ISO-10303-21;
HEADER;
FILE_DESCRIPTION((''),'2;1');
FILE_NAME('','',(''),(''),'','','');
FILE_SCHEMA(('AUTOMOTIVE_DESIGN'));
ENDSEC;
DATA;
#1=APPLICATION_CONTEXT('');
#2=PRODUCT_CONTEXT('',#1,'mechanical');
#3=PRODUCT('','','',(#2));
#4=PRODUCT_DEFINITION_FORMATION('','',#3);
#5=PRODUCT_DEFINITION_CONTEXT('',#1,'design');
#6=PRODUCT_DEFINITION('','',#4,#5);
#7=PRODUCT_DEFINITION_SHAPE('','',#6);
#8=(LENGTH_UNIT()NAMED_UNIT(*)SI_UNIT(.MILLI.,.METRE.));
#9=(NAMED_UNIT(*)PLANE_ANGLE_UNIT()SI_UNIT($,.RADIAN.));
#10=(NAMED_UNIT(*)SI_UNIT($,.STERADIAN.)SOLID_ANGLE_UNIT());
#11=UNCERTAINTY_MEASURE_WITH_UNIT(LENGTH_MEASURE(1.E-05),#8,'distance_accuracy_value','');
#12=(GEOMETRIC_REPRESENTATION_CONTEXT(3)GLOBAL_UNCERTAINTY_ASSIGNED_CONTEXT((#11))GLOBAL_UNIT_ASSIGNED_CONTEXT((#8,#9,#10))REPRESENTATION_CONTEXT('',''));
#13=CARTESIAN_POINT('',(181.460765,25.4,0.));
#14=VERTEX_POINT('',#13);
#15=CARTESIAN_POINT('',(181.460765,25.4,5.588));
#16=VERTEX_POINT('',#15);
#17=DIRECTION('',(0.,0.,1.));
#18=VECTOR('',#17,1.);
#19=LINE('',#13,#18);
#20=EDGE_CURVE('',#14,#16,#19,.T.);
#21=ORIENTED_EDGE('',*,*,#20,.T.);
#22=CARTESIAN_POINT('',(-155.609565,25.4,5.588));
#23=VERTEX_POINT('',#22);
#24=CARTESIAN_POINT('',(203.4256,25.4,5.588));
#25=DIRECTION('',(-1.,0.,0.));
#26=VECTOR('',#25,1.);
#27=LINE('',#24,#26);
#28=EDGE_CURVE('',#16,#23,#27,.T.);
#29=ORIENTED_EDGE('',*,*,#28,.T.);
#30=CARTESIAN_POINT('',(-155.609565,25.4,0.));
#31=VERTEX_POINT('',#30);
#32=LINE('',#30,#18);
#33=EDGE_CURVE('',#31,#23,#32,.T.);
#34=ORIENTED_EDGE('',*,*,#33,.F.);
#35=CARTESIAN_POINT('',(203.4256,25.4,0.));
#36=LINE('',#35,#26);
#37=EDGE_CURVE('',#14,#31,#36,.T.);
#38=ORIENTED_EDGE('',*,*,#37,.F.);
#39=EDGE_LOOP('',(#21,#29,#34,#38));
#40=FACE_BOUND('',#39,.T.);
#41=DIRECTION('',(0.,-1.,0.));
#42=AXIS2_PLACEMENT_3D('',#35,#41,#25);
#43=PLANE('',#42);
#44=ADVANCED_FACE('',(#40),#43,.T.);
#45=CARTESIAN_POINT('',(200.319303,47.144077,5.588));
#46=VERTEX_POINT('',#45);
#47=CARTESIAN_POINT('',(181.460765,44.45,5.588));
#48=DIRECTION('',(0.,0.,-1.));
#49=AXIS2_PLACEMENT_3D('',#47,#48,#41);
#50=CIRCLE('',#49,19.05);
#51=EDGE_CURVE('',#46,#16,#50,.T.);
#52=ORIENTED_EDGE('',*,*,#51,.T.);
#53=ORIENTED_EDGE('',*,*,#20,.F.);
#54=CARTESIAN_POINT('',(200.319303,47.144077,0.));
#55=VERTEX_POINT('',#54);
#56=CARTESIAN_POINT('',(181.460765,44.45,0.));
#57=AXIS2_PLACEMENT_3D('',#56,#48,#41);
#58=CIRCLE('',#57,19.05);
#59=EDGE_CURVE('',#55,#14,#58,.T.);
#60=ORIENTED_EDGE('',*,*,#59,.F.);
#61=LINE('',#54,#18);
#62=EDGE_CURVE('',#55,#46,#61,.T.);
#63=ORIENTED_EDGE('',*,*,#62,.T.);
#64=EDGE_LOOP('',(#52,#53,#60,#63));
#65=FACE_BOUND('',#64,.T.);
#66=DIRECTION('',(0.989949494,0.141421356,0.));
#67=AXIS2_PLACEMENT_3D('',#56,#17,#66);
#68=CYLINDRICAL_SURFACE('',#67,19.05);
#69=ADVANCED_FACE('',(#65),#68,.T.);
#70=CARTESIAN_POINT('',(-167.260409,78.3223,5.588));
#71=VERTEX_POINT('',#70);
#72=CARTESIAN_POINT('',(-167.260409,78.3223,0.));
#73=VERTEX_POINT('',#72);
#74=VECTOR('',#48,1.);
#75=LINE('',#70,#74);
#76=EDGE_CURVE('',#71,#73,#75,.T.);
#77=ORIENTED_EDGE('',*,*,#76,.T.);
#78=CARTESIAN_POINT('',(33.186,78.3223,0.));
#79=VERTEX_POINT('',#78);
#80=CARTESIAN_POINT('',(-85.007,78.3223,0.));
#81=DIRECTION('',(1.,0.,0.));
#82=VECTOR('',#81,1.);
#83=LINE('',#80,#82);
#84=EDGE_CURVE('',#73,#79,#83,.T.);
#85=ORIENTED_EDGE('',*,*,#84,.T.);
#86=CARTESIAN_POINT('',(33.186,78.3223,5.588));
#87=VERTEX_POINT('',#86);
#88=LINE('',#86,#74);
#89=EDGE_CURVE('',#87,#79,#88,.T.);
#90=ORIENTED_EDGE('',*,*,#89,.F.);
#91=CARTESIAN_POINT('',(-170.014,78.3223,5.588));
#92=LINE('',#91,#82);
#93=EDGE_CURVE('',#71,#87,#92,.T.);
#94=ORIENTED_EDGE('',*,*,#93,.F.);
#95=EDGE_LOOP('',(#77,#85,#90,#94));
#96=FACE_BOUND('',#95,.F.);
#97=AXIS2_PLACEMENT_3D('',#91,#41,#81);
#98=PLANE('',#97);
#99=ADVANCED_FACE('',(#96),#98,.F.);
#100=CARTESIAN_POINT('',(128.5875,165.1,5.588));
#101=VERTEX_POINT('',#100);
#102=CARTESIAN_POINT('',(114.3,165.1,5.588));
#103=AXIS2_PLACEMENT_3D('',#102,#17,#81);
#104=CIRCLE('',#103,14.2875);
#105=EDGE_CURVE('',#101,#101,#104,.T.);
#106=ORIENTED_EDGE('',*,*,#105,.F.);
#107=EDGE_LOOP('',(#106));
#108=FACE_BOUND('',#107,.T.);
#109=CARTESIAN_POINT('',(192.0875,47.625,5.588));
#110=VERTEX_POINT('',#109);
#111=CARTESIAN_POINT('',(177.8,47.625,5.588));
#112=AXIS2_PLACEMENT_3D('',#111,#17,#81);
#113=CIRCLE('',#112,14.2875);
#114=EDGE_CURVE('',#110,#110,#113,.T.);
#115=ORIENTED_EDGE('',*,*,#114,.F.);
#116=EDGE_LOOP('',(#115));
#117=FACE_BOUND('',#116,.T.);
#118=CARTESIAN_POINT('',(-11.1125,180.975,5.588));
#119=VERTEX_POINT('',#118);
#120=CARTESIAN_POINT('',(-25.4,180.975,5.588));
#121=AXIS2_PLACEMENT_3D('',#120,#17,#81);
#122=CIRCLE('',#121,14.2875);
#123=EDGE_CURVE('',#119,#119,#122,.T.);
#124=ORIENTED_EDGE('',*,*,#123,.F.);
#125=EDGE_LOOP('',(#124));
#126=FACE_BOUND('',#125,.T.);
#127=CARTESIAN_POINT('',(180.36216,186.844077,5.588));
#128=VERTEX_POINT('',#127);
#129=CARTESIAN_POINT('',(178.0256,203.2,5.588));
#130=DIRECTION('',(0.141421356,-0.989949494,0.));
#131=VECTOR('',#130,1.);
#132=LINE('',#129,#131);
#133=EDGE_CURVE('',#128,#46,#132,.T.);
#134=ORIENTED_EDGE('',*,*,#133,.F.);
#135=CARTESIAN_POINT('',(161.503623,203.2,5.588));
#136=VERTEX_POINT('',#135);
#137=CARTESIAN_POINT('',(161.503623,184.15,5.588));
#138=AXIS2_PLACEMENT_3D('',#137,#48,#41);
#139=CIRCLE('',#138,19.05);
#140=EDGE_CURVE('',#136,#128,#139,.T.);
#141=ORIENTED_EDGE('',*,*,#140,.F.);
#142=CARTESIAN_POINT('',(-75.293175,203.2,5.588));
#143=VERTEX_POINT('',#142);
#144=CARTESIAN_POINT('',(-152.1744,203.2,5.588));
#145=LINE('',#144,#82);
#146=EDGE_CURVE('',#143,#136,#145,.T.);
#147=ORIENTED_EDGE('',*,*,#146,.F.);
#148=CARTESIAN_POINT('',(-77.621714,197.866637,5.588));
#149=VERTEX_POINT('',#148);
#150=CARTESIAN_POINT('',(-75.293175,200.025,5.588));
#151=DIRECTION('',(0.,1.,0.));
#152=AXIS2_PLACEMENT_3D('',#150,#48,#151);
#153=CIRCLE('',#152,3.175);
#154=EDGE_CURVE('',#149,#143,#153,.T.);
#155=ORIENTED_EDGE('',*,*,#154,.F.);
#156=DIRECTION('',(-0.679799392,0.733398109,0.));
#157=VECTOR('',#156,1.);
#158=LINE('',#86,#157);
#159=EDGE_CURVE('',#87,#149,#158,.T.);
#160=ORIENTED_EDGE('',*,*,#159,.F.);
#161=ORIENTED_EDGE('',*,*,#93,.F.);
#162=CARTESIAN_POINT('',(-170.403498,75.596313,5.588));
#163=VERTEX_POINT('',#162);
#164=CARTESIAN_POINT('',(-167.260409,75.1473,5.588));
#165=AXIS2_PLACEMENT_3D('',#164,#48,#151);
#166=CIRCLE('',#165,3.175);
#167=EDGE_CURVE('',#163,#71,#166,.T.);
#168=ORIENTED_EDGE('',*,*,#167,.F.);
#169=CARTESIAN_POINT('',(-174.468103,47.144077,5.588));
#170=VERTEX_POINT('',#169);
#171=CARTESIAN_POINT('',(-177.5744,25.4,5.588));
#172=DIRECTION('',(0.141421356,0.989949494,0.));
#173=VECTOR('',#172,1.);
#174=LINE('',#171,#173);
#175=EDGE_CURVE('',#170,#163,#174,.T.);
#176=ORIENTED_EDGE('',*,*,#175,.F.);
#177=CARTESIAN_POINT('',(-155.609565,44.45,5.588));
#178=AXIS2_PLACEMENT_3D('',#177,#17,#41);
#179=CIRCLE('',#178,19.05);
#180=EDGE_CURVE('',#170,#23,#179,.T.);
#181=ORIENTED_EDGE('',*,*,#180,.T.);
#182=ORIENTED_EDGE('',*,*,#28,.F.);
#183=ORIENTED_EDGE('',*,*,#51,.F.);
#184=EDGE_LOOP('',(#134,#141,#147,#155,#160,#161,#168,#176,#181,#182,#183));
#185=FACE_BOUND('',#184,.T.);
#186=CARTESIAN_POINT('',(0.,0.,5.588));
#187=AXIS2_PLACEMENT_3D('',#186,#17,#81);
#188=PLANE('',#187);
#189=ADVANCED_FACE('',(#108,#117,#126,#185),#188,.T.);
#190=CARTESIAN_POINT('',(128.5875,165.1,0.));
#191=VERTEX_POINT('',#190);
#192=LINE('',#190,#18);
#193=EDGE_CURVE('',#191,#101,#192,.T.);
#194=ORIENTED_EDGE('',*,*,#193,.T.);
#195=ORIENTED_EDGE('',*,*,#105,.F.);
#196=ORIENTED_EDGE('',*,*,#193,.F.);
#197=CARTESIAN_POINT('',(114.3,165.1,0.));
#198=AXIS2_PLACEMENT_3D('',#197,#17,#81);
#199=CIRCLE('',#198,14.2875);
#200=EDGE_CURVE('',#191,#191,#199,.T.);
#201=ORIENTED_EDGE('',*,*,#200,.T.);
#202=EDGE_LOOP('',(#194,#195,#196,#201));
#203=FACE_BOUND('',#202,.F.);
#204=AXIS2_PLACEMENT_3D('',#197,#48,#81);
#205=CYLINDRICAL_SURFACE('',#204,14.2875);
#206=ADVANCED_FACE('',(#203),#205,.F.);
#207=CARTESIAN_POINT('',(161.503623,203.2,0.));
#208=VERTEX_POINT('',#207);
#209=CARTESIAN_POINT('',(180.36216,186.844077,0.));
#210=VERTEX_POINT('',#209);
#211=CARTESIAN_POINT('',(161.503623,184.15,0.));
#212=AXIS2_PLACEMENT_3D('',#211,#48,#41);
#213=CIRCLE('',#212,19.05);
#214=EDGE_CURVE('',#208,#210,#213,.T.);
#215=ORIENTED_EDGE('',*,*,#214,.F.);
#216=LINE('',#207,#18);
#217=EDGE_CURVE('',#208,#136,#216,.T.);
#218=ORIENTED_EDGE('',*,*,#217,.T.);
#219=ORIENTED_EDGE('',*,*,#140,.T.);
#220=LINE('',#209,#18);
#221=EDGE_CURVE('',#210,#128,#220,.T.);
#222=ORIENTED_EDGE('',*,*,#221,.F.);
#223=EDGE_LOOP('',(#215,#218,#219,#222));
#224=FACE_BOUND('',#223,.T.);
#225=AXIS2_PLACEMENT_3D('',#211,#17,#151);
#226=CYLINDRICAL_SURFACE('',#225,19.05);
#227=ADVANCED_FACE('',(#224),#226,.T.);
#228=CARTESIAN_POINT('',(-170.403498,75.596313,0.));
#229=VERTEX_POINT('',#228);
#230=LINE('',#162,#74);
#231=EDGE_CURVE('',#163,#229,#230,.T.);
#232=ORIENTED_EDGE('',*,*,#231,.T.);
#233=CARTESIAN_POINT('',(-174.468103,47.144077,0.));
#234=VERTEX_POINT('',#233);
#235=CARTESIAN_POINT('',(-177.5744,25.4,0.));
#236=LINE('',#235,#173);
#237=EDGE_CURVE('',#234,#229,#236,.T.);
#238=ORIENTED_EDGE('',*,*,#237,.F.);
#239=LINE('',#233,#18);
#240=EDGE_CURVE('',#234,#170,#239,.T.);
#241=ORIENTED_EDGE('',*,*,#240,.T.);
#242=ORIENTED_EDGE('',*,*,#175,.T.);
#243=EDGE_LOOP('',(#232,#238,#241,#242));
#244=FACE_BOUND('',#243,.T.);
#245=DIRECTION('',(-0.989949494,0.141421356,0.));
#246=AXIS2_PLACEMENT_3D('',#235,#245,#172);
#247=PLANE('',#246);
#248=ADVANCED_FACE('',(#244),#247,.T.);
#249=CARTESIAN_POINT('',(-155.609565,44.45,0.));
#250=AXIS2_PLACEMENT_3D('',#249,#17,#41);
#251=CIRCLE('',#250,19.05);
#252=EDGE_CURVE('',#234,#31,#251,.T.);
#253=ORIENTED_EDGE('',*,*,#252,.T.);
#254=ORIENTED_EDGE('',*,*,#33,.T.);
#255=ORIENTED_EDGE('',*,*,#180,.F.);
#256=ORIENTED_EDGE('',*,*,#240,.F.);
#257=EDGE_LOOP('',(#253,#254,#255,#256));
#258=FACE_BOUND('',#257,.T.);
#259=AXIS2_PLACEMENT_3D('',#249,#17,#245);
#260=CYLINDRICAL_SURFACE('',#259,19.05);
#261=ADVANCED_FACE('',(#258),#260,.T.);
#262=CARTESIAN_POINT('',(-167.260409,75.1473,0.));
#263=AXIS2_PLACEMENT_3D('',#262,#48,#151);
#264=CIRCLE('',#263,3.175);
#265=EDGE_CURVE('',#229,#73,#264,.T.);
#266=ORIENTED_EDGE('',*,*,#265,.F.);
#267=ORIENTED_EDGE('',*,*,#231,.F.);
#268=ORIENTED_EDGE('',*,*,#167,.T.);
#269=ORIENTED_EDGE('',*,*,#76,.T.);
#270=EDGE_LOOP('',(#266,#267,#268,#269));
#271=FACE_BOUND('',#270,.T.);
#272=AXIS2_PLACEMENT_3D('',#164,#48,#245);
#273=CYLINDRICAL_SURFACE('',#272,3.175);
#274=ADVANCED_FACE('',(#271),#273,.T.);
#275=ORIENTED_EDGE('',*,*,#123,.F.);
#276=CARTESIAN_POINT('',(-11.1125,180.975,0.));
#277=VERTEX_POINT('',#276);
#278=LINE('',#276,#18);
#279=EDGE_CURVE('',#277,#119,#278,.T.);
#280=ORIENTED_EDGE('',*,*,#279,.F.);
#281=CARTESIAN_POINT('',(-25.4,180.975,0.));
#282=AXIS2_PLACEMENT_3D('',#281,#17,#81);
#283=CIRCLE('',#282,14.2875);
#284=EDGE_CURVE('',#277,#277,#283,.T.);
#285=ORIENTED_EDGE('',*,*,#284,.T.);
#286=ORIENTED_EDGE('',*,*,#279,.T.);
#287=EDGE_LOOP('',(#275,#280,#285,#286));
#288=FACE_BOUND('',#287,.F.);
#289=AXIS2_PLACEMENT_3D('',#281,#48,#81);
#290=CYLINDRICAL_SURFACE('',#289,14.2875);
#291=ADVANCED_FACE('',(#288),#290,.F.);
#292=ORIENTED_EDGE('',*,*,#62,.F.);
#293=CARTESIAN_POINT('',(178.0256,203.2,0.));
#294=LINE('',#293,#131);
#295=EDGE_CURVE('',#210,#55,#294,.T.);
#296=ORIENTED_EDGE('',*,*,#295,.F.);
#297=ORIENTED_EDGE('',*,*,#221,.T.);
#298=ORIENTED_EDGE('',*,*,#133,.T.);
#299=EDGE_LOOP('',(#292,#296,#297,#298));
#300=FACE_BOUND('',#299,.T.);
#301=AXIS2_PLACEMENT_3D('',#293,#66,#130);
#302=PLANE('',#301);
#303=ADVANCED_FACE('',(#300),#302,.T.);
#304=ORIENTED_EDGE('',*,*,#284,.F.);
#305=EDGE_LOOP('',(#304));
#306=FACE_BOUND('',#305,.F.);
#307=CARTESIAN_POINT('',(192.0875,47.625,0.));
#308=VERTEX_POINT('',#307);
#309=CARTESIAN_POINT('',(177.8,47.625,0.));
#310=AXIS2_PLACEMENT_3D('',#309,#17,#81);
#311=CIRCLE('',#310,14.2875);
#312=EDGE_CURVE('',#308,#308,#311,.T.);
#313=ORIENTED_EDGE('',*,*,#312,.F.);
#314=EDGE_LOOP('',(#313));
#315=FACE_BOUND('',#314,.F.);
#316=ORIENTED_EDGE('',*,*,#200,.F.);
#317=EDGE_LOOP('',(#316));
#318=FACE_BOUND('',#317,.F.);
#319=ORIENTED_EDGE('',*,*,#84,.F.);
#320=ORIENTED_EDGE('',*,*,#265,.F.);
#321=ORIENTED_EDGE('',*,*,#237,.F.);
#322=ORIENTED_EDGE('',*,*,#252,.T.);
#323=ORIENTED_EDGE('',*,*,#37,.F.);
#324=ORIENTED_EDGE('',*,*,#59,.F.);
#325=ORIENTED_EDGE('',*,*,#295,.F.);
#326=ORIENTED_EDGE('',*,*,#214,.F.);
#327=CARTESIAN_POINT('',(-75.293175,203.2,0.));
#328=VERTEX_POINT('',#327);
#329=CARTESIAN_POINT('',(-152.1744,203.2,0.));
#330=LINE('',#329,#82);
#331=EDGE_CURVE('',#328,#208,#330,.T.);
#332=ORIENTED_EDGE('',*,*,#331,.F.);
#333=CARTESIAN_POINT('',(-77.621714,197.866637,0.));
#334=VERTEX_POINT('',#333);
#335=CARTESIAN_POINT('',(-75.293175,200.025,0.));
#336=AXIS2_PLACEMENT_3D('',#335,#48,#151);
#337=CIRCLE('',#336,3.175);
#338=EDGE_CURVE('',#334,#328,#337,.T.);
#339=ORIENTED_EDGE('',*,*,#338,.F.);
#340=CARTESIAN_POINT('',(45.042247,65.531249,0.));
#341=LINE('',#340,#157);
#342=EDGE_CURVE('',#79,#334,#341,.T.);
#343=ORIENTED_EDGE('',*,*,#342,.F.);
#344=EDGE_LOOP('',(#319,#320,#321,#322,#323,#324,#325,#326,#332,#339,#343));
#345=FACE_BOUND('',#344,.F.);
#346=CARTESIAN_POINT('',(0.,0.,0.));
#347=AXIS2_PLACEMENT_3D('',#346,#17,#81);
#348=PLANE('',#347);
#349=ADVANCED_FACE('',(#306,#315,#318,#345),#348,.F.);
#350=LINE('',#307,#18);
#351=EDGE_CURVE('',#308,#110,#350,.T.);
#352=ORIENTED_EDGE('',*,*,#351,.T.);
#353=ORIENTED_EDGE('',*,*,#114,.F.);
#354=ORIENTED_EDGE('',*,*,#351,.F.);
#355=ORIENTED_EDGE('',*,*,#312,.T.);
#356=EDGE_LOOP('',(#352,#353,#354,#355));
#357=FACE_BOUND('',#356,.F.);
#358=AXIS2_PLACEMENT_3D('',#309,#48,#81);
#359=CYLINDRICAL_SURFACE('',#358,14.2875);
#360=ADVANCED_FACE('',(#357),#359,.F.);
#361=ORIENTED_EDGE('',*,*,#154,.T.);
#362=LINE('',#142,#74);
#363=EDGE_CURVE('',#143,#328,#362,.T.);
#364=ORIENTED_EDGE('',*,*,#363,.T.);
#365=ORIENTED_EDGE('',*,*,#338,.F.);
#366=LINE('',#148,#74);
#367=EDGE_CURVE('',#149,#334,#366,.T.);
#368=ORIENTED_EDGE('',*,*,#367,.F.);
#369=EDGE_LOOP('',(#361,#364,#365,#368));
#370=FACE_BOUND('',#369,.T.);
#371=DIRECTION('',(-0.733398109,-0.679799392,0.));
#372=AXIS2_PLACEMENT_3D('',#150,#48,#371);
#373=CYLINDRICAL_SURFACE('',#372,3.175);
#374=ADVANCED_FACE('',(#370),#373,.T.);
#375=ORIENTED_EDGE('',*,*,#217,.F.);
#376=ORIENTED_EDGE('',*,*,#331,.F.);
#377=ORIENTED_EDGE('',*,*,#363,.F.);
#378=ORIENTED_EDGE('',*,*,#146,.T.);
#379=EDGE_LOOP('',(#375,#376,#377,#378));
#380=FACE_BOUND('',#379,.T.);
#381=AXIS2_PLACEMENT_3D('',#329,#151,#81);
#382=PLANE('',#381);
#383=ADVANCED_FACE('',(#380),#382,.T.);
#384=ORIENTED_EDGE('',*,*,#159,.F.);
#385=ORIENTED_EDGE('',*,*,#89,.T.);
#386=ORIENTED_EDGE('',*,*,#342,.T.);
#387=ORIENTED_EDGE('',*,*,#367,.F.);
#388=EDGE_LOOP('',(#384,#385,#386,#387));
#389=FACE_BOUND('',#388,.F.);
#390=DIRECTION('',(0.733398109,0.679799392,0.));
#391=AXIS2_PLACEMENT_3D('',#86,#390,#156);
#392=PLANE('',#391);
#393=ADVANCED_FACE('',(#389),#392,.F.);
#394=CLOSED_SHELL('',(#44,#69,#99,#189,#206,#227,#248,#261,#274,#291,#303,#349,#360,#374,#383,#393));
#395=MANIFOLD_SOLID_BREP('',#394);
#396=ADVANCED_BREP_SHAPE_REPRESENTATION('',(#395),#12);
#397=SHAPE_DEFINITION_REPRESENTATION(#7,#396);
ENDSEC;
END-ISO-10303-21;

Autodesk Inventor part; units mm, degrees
ref_plane "YZ Plane" through (0, 0, 0) normal (1, 0, 0) x (0, 1, 0)
ref_plane "XZ Plane" through (0, 0, 0) normal (0, 1, 0) x (-1, 0, 0)
ref_plane "XY Plane" through (0, 0, 0) normal (0, 0, 1) x (1, 0, 0)
sketch "Sketch1" plane through (0, 0, 0) normal (0, 0, 1) x (1, 0, 0)
  line L0 (-177.5744, 25.4) -> (-152.1744, 203.2)
  line L1 (-152.1744, 203.2) -> (178.0256, 203.2)
  line L2 (178.0256, 203.2) -> (203.4256, 25.4)
  line L3 (203.4256, 25.4) -> (-177.5744, 25.4)
  circle A0 centre (114.3, 165.1) radius 14.2875
  circle A1 centre (-25.4, 180.975) radius 14.2875
  circle A2 centre (177.8, 47.625) radius 14.2875
  circle A3 centre (505.2413, 166.6875) radius 88.9 construction
  line L4 (-713.704, 0) -> (0, 0) construction
  line L5 (0, 0) -> (0, -152.4) construction
  line L6 (0, -152.4) -> (-713.704, -152.4) construction
  line L7 (-713.704, -152.4) -> (-713.704, 0) construction
  circle A4 centre (177.8, 47.625) radius 50.8 construction
  line L8 (0, -152.4) -> (745.4464, -152.4) construction
  dimension "d0" = 28.575
  dimension "d1" = 22.225
  dimension "d2" = 22.225
  dimension "d7" = 177.8
  dimension "d8" = 152.4
  dimension "d9" = 101.6
  dimension "d11" = 177.8
  dimension "d12" = 25.4
  dimension "d13" = 177.8
  dimension "d14" = 22.225
  dimension "d15" = 203.2
  dimension "d16" = 38.1
  dimension "d17" = 63.5
  dimension "d18" = 381
  dimension "d19" = 330.2
extrude "Extrusion1" add sketch "Sketch1" along normal blind 5.588
fillet "Fillet1" radius 19.05 4 edges at (203.4256, 25.4, 2.794) (178.0256, 203.2, 2.794) (-152.1744, 203.2, 2.794) (-177.5744, 25.4, 2.794)
sketch "Sketch2" plane through (0, 0, 5.588) normal (0, 0, 1) x (1, 0, 0)
  line L0 (-154.5109, 186.8441) -> (-174.4681, 47.1441) projected
  line L1 (-170.014, 78.3223) -> (33.186, 78.3223)
  line L2 (33.186, 78.3223) -> (-82.5653, 203.2)
  line L3 (161.5037, 203.2) -> (-135.6524, 203.2) projected
  line L4 (-82.5653, 203.2) -> (-152.1744, 203.2)
  line L5 (-152.1744, 203.2) -> (-170.014, 78.3223)
  point P0 (0, 0)
  dimension "d23" = 203.2
extrude "Extrusion2" cut sketch "Sketch2" against normal through all
fillet "Fillet2" radius 3.175 2 edges at (-170.014, 78.3223, 2.794) (-82.5653, 203.2, 2.794)
properties part number "2021 Intake Panels" material "Polycarbonate, Clear"
